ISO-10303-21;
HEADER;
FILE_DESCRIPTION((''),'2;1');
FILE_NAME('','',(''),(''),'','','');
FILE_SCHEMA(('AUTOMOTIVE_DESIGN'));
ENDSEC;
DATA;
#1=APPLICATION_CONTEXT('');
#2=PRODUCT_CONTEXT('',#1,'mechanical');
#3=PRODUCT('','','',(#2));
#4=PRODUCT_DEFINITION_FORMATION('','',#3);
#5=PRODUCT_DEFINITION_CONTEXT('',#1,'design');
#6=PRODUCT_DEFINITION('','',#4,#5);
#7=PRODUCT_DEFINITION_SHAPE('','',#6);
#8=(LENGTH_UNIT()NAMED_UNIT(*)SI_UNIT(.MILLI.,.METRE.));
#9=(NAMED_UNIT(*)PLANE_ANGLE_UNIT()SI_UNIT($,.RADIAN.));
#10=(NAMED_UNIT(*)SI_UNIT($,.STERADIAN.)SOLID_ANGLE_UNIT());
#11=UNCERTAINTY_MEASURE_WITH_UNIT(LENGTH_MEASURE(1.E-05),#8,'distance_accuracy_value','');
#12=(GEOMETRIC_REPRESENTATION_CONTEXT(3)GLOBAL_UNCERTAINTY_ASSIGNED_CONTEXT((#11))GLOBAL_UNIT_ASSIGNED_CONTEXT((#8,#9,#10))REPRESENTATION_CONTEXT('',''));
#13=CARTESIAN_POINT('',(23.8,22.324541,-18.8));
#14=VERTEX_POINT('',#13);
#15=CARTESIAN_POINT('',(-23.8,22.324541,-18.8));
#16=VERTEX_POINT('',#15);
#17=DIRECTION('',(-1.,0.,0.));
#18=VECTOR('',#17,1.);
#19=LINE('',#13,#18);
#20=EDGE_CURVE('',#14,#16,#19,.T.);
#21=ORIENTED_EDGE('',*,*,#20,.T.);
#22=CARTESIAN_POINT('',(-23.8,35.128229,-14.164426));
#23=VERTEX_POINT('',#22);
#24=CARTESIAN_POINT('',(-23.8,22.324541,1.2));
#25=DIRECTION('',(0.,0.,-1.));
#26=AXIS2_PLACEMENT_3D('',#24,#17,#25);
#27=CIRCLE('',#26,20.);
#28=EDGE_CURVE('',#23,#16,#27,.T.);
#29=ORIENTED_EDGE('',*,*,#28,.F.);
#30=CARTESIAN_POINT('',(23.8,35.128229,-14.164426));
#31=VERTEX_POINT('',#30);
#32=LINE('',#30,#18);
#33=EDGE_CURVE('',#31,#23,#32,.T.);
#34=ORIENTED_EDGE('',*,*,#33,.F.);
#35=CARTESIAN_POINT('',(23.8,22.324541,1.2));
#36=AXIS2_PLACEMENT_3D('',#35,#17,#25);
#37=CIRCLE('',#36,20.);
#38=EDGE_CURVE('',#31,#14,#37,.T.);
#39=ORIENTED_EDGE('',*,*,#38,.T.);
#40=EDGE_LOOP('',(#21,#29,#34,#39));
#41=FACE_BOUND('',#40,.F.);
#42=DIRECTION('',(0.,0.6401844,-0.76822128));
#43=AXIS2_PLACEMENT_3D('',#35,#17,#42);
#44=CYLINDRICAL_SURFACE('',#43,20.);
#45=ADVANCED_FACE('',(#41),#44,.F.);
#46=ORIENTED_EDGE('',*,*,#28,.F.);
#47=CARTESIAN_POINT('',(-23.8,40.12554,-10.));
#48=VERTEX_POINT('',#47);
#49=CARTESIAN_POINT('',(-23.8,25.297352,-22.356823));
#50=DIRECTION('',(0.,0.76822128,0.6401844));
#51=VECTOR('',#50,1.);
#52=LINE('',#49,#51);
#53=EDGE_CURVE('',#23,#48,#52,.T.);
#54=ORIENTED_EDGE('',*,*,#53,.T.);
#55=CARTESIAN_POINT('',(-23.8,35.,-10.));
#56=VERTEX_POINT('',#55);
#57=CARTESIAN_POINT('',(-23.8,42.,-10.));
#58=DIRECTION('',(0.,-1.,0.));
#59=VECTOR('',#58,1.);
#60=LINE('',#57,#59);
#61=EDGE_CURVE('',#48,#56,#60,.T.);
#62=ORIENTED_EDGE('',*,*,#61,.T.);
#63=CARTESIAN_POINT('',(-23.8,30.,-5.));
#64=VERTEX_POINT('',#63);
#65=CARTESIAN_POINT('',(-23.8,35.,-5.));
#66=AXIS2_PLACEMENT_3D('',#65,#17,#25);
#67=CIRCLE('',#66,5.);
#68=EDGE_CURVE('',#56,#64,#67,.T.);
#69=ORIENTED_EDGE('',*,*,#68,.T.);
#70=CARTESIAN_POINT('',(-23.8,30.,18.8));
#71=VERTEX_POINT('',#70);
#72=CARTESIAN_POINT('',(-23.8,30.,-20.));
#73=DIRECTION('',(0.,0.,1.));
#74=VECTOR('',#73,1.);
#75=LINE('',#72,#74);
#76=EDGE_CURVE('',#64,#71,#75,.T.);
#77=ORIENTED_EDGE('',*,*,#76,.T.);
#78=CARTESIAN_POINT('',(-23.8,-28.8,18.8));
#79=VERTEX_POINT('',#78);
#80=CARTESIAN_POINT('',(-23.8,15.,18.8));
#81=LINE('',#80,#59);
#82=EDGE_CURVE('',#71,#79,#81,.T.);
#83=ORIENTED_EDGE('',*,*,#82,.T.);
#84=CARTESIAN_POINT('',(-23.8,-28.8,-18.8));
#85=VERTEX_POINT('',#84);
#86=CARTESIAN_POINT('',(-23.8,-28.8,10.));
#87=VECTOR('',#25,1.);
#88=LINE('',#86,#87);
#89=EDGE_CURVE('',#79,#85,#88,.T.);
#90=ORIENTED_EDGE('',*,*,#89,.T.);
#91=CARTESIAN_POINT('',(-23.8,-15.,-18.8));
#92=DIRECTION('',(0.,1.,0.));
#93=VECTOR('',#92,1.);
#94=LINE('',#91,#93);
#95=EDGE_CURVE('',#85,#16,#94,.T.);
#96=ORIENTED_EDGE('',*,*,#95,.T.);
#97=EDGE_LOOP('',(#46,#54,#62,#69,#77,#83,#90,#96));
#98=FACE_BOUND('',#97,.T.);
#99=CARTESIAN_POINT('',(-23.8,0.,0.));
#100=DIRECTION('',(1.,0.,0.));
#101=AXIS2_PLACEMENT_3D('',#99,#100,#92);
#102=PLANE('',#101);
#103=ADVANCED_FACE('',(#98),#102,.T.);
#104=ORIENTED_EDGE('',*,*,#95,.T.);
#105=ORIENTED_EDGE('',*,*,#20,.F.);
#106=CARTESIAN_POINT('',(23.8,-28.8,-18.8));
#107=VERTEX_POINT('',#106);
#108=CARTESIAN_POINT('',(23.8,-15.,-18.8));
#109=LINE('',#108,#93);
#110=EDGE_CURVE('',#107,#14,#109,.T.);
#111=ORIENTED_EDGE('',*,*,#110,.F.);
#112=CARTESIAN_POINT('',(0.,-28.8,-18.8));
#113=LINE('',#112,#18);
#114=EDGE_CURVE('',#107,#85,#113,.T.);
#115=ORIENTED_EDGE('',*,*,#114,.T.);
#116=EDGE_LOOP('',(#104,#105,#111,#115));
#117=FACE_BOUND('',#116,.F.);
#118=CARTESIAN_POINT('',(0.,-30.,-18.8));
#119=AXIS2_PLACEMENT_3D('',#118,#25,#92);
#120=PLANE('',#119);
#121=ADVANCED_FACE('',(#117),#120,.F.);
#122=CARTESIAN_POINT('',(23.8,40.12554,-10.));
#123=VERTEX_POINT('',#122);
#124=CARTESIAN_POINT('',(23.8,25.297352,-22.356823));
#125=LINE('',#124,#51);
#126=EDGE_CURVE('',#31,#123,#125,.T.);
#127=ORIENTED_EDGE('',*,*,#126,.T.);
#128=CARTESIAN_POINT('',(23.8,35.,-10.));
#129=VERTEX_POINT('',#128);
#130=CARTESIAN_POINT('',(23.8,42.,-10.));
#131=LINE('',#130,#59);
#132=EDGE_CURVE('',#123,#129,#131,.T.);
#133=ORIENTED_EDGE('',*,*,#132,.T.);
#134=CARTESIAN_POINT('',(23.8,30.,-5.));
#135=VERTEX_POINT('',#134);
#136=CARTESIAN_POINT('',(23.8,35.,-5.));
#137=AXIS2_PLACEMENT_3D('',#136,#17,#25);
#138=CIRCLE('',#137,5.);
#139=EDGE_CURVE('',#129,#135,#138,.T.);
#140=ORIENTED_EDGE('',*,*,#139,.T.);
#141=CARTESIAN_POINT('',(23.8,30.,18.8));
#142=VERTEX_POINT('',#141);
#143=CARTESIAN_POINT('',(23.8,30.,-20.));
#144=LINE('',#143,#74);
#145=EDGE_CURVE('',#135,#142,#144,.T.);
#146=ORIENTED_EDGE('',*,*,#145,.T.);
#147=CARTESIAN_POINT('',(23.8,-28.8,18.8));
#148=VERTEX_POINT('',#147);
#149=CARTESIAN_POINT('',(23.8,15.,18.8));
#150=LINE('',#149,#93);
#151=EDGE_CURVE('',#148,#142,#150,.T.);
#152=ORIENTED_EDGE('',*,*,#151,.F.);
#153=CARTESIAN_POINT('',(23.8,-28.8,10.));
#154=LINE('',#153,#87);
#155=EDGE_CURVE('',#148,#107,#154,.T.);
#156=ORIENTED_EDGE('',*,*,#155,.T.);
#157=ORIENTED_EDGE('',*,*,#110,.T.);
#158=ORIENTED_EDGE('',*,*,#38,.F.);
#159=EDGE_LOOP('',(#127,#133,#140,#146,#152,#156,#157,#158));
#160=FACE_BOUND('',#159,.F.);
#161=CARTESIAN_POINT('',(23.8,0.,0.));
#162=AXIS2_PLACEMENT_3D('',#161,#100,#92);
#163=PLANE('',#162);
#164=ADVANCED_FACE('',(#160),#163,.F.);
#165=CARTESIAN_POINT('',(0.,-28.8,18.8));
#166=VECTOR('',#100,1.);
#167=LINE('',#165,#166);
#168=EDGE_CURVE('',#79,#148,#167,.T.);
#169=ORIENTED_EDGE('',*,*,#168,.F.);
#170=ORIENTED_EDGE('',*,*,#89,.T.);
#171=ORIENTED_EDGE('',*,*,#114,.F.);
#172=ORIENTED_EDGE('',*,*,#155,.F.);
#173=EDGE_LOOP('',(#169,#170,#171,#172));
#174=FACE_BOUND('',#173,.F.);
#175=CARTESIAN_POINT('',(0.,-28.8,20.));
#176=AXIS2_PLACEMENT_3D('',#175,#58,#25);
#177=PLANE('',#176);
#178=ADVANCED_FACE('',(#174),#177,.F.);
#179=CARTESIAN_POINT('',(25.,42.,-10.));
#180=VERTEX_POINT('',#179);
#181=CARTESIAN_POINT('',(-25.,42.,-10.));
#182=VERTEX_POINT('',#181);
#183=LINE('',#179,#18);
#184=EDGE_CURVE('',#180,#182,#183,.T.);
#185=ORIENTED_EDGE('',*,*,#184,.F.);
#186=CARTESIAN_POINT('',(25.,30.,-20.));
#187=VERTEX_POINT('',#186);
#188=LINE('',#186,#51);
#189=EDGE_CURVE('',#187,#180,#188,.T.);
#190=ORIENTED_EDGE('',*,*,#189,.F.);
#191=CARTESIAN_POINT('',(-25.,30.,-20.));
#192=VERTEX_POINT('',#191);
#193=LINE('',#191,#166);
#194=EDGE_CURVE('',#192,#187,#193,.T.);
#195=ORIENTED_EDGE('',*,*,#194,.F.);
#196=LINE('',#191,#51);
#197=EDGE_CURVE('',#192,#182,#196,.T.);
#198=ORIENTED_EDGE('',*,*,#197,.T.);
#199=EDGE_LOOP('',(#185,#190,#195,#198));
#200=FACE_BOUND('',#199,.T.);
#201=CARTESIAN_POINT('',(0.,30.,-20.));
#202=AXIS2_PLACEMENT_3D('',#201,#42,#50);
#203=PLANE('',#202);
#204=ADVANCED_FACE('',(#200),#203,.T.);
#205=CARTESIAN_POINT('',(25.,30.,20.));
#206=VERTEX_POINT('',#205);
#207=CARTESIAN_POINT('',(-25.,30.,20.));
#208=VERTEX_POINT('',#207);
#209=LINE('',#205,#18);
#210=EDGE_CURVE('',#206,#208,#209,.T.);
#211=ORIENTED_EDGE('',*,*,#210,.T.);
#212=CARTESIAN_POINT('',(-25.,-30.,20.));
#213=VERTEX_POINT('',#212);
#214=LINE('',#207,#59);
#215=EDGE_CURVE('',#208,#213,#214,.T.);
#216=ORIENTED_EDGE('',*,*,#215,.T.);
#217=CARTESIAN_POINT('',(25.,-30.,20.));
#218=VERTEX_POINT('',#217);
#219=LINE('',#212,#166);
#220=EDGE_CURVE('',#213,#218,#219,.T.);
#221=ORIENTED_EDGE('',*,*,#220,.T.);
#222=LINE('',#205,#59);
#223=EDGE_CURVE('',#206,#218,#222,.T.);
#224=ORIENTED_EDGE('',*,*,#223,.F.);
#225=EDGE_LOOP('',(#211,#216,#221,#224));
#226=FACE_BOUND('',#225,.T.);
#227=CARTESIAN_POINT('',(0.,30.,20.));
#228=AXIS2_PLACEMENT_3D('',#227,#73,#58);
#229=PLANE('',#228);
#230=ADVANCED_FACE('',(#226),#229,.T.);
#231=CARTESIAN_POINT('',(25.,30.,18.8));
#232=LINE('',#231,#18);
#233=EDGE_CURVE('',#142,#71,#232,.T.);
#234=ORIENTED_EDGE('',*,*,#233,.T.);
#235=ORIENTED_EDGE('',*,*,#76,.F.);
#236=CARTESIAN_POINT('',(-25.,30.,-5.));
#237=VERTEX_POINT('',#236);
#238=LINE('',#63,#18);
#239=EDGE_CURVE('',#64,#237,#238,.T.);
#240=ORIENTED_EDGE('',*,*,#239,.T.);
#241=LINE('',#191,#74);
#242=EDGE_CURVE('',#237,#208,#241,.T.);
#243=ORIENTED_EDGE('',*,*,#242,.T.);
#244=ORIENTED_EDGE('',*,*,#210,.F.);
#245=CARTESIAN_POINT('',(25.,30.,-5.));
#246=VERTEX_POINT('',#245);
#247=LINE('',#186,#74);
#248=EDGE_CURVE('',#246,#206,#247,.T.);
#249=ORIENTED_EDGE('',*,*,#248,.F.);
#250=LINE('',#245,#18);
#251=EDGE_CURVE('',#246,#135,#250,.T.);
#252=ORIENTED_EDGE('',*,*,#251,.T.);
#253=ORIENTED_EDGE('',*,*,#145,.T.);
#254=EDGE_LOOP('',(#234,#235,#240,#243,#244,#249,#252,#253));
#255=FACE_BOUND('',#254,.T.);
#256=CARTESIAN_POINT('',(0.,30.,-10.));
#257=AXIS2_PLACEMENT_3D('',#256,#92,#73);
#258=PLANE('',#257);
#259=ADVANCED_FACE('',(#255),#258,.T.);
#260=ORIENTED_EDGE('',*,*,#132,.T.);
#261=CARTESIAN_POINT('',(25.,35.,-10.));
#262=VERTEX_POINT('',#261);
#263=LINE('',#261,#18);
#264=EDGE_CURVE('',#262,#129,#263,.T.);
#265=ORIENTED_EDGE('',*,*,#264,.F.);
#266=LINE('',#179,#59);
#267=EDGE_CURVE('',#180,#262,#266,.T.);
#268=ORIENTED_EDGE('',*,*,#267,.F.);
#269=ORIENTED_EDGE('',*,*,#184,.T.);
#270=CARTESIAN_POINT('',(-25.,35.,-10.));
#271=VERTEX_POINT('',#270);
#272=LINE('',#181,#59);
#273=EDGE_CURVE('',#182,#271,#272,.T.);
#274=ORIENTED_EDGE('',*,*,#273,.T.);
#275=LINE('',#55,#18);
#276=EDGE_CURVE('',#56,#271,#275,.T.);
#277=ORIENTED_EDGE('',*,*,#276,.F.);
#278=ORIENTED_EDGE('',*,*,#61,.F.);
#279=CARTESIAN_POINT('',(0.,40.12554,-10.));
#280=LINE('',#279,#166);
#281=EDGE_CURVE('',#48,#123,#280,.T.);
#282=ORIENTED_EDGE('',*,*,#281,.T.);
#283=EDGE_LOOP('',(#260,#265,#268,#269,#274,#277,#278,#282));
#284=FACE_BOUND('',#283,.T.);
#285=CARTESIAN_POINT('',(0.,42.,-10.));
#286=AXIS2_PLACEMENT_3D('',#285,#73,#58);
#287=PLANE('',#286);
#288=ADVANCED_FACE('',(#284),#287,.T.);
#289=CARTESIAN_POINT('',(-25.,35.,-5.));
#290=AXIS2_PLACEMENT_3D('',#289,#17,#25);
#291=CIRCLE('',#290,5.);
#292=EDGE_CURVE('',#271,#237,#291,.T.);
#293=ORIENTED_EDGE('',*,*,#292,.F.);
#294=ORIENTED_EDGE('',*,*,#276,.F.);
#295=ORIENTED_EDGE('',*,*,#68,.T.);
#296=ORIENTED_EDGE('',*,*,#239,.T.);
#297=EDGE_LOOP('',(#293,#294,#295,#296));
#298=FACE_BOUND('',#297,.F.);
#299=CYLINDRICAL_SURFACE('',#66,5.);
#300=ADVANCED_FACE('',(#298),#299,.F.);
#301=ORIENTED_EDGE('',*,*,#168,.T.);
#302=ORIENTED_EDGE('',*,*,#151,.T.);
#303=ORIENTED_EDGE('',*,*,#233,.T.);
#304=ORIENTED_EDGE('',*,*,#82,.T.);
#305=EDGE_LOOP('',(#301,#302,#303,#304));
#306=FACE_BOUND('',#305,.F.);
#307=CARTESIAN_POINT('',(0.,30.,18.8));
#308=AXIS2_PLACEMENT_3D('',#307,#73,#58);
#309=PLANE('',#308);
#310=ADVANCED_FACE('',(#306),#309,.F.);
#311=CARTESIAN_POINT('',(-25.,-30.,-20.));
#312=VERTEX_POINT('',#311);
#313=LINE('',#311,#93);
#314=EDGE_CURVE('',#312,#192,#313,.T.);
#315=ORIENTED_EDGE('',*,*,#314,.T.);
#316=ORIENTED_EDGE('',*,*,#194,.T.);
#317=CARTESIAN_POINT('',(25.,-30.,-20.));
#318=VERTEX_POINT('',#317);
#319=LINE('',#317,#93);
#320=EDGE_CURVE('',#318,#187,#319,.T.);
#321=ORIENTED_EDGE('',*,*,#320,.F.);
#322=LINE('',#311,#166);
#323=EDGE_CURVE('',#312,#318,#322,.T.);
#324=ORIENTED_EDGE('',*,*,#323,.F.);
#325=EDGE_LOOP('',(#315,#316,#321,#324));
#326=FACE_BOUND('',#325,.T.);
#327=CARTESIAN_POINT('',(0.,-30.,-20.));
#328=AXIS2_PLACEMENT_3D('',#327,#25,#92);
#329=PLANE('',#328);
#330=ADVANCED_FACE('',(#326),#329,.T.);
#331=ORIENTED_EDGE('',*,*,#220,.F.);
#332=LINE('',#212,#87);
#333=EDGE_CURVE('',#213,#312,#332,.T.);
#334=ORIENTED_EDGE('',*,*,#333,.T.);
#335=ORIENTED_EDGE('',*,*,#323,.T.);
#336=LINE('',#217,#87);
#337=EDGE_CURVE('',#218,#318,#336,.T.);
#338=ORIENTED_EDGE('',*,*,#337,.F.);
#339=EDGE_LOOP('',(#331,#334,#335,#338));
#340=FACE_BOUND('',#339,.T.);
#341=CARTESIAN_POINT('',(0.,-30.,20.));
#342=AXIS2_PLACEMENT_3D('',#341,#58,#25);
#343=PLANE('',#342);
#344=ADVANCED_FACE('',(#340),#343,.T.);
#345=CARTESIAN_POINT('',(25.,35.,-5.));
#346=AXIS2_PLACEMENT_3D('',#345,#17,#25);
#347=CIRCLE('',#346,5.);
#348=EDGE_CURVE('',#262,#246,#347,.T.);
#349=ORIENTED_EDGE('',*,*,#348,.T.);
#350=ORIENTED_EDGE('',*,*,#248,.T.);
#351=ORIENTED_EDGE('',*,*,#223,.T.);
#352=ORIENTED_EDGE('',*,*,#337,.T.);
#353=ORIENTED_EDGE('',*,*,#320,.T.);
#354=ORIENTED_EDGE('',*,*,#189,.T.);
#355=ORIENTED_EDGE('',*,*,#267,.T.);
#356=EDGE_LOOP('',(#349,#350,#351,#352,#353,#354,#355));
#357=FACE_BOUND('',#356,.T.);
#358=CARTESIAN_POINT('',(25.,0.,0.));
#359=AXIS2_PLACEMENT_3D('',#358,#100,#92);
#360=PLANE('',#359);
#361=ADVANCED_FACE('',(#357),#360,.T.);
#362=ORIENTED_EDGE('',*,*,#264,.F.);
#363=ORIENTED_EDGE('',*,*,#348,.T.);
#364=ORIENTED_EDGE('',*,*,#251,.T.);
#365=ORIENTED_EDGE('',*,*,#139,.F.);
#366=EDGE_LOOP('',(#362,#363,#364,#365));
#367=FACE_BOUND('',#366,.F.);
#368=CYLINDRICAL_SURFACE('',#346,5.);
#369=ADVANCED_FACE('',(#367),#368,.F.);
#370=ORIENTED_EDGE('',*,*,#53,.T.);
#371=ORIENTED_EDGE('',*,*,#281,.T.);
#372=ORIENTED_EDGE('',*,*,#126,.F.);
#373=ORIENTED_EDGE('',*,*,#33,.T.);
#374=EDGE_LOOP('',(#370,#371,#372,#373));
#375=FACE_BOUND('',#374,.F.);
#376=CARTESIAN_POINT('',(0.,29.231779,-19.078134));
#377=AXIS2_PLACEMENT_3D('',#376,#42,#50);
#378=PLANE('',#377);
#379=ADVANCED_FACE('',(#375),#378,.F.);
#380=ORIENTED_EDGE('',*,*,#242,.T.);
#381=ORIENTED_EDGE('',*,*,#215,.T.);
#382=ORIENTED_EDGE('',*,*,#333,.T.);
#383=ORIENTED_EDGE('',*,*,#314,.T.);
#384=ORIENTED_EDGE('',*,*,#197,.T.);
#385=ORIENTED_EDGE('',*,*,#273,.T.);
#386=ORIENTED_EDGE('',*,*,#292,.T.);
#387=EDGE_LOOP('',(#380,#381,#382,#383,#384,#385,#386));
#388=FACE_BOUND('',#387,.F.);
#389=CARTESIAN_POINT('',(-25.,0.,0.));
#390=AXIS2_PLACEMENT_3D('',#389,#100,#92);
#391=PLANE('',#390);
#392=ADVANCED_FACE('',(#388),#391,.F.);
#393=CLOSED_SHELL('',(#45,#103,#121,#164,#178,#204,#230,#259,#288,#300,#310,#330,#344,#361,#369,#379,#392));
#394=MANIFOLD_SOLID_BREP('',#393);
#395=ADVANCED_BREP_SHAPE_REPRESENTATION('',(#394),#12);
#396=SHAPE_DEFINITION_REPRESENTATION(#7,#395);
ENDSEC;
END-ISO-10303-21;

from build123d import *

# Parameters (mm, degrees)
F1_DEPTH = 25
F2_T     = -1.2
F3_R     = 20
F4_R     = 5


with BuildPart() as f1:
    # F0 (on Right) → F1 (new body, symmetric)
    with BuildSketch(Plane.YZ):
        Polygon((30, -10), (30, 20), (-30, 20), (-30, -20), (30, -20), align=None)
        Polygon((42, -10), (30, -10), (30, -20), align=None)
    extrude(amount=F1_DEPTH, both=True)

    # F2
    f2_openings = [f1.faces().sort_by_distance(p)[0] for p in [
        (0, 30, 5),
        (0, 36, -10),
    ]]
    offset(amount=F2_T, openings=f2_openings)

    # F3
    f3_edges = [f1.edges().sort_by_distance(p)[0] for p in [
        (0, 29.56554, -18.8),
    ]]
    fillet(f3_edges, radius=F3_R)

    # F4
    f4_edges = [f1.edges().sort_by_distance(p)[0] for p in [
        (-24.4, 30, -10),
        (24.4, 30, -10),
    ]]
    fillet(f4_edges, radius=F4_R)


solid = f1.part
